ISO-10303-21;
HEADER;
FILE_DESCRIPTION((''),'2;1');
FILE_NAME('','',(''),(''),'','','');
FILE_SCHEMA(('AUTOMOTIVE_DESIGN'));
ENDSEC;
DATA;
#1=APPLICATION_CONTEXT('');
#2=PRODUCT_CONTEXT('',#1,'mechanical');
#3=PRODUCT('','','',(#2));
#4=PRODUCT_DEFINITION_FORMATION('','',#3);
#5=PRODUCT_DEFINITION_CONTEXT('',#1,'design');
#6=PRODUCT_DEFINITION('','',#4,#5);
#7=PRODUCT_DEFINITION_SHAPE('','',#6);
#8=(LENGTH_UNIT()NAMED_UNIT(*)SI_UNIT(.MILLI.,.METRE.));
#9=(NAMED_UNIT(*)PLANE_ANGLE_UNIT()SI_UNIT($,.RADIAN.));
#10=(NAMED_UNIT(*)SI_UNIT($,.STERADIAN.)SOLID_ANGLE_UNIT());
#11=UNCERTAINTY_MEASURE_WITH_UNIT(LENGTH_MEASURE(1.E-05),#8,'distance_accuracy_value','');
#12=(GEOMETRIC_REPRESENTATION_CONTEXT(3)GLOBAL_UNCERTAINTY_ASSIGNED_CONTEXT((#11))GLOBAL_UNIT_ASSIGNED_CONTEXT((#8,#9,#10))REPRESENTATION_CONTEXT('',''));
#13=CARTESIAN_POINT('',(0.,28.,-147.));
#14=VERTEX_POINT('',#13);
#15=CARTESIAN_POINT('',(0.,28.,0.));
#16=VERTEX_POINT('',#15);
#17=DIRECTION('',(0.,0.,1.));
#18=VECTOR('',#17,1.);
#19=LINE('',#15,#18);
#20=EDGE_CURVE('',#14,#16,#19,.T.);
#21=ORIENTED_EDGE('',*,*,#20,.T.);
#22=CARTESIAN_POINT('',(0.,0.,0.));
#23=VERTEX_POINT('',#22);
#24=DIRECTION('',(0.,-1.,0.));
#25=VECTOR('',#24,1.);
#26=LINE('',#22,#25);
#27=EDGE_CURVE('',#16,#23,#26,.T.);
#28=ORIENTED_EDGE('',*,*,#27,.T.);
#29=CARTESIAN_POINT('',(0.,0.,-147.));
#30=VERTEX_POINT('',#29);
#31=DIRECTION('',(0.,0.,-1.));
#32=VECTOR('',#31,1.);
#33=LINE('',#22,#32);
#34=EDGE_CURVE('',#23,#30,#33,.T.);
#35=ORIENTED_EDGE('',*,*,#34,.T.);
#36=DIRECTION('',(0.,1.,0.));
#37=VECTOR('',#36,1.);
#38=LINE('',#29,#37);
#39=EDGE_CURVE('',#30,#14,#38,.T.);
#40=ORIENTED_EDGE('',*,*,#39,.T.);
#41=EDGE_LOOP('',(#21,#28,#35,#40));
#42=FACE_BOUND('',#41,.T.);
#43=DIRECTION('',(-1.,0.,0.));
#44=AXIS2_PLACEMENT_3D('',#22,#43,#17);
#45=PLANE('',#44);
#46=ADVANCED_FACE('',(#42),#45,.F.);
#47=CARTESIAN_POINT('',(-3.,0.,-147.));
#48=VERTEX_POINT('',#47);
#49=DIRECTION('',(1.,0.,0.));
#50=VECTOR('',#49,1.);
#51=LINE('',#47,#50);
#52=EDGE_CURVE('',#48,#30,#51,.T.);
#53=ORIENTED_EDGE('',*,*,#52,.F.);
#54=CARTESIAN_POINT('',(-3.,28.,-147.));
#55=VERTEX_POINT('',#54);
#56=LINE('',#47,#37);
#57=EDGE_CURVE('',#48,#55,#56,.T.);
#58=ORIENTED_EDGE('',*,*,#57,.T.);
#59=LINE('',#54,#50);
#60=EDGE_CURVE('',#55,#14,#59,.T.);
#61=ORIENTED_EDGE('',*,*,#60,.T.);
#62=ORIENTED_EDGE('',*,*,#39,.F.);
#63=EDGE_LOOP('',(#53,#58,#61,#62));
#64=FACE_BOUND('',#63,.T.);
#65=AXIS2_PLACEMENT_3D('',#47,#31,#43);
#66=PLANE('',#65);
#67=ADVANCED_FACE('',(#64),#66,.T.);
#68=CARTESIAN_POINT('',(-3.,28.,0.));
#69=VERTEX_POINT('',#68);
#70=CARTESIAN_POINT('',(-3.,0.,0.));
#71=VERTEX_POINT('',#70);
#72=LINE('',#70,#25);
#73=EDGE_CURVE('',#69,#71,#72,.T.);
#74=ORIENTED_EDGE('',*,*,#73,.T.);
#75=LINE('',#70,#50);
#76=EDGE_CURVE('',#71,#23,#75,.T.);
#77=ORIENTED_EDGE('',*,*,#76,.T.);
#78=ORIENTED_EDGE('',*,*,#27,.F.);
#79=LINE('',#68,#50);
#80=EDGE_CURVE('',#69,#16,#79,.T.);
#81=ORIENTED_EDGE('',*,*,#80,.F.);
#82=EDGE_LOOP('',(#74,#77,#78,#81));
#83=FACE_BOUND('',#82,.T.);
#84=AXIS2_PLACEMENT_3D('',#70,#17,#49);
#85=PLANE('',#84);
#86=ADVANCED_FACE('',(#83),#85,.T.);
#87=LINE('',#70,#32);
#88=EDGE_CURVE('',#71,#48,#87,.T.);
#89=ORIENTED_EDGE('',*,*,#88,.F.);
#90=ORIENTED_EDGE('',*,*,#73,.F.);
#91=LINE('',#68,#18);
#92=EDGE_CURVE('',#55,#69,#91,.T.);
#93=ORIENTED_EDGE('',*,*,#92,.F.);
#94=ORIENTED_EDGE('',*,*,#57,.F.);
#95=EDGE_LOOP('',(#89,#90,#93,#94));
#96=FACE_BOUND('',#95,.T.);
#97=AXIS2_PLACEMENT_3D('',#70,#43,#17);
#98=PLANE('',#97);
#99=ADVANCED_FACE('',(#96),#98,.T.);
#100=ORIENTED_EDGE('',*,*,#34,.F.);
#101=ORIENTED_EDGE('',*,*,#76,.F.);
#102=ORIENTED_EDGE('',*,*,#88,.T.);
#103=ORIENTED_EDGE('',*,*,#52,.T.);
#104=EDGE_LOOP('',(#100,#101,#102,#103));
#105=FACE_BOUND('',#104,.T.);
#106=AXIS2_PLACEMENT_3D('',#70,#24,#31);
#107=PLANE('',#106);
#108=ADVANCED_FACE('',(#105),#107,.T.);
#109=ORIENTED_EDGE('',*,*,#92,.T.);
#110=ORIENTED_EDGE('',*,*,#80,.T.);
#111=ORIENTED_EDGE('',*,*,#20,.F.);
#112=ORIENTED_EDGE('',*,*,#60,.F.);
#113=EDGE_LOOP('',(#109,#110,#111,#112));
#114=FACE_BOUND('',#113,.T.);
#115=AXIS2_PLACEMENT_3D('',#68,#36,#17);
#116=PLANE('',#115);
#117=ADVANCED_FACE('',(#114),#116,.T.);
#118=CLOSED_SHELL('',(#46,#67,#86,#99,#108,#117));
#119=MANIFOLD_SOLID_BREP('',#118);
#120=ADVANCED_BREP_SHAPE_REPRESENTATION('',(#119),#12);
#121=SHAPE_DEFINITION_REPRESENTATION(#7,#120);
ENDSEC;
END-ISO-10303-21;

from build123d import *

# Parameters (mm, degrees)
SKETCH1_W          = 147
SKETCH1_H          = 28
BASE_FLANGE1_DEPTH = 3


# Sheet-metal steps are written as plain solids
with BuildPart() as part:
    # Sketch1 → Base-Flange1 (new body)
    with BuildSketch(Plane(origin=(0, 0, 0), x_dir=(0, 0, -1), z_dir=(1, 0, 0))):
        with Locations((73.5, 14)):
            Rectangle(SKETCH1_W, SKETCH1_H)
    extrude(amount=-BASE_FLANGE1_DEPTH)


solid = part.part
